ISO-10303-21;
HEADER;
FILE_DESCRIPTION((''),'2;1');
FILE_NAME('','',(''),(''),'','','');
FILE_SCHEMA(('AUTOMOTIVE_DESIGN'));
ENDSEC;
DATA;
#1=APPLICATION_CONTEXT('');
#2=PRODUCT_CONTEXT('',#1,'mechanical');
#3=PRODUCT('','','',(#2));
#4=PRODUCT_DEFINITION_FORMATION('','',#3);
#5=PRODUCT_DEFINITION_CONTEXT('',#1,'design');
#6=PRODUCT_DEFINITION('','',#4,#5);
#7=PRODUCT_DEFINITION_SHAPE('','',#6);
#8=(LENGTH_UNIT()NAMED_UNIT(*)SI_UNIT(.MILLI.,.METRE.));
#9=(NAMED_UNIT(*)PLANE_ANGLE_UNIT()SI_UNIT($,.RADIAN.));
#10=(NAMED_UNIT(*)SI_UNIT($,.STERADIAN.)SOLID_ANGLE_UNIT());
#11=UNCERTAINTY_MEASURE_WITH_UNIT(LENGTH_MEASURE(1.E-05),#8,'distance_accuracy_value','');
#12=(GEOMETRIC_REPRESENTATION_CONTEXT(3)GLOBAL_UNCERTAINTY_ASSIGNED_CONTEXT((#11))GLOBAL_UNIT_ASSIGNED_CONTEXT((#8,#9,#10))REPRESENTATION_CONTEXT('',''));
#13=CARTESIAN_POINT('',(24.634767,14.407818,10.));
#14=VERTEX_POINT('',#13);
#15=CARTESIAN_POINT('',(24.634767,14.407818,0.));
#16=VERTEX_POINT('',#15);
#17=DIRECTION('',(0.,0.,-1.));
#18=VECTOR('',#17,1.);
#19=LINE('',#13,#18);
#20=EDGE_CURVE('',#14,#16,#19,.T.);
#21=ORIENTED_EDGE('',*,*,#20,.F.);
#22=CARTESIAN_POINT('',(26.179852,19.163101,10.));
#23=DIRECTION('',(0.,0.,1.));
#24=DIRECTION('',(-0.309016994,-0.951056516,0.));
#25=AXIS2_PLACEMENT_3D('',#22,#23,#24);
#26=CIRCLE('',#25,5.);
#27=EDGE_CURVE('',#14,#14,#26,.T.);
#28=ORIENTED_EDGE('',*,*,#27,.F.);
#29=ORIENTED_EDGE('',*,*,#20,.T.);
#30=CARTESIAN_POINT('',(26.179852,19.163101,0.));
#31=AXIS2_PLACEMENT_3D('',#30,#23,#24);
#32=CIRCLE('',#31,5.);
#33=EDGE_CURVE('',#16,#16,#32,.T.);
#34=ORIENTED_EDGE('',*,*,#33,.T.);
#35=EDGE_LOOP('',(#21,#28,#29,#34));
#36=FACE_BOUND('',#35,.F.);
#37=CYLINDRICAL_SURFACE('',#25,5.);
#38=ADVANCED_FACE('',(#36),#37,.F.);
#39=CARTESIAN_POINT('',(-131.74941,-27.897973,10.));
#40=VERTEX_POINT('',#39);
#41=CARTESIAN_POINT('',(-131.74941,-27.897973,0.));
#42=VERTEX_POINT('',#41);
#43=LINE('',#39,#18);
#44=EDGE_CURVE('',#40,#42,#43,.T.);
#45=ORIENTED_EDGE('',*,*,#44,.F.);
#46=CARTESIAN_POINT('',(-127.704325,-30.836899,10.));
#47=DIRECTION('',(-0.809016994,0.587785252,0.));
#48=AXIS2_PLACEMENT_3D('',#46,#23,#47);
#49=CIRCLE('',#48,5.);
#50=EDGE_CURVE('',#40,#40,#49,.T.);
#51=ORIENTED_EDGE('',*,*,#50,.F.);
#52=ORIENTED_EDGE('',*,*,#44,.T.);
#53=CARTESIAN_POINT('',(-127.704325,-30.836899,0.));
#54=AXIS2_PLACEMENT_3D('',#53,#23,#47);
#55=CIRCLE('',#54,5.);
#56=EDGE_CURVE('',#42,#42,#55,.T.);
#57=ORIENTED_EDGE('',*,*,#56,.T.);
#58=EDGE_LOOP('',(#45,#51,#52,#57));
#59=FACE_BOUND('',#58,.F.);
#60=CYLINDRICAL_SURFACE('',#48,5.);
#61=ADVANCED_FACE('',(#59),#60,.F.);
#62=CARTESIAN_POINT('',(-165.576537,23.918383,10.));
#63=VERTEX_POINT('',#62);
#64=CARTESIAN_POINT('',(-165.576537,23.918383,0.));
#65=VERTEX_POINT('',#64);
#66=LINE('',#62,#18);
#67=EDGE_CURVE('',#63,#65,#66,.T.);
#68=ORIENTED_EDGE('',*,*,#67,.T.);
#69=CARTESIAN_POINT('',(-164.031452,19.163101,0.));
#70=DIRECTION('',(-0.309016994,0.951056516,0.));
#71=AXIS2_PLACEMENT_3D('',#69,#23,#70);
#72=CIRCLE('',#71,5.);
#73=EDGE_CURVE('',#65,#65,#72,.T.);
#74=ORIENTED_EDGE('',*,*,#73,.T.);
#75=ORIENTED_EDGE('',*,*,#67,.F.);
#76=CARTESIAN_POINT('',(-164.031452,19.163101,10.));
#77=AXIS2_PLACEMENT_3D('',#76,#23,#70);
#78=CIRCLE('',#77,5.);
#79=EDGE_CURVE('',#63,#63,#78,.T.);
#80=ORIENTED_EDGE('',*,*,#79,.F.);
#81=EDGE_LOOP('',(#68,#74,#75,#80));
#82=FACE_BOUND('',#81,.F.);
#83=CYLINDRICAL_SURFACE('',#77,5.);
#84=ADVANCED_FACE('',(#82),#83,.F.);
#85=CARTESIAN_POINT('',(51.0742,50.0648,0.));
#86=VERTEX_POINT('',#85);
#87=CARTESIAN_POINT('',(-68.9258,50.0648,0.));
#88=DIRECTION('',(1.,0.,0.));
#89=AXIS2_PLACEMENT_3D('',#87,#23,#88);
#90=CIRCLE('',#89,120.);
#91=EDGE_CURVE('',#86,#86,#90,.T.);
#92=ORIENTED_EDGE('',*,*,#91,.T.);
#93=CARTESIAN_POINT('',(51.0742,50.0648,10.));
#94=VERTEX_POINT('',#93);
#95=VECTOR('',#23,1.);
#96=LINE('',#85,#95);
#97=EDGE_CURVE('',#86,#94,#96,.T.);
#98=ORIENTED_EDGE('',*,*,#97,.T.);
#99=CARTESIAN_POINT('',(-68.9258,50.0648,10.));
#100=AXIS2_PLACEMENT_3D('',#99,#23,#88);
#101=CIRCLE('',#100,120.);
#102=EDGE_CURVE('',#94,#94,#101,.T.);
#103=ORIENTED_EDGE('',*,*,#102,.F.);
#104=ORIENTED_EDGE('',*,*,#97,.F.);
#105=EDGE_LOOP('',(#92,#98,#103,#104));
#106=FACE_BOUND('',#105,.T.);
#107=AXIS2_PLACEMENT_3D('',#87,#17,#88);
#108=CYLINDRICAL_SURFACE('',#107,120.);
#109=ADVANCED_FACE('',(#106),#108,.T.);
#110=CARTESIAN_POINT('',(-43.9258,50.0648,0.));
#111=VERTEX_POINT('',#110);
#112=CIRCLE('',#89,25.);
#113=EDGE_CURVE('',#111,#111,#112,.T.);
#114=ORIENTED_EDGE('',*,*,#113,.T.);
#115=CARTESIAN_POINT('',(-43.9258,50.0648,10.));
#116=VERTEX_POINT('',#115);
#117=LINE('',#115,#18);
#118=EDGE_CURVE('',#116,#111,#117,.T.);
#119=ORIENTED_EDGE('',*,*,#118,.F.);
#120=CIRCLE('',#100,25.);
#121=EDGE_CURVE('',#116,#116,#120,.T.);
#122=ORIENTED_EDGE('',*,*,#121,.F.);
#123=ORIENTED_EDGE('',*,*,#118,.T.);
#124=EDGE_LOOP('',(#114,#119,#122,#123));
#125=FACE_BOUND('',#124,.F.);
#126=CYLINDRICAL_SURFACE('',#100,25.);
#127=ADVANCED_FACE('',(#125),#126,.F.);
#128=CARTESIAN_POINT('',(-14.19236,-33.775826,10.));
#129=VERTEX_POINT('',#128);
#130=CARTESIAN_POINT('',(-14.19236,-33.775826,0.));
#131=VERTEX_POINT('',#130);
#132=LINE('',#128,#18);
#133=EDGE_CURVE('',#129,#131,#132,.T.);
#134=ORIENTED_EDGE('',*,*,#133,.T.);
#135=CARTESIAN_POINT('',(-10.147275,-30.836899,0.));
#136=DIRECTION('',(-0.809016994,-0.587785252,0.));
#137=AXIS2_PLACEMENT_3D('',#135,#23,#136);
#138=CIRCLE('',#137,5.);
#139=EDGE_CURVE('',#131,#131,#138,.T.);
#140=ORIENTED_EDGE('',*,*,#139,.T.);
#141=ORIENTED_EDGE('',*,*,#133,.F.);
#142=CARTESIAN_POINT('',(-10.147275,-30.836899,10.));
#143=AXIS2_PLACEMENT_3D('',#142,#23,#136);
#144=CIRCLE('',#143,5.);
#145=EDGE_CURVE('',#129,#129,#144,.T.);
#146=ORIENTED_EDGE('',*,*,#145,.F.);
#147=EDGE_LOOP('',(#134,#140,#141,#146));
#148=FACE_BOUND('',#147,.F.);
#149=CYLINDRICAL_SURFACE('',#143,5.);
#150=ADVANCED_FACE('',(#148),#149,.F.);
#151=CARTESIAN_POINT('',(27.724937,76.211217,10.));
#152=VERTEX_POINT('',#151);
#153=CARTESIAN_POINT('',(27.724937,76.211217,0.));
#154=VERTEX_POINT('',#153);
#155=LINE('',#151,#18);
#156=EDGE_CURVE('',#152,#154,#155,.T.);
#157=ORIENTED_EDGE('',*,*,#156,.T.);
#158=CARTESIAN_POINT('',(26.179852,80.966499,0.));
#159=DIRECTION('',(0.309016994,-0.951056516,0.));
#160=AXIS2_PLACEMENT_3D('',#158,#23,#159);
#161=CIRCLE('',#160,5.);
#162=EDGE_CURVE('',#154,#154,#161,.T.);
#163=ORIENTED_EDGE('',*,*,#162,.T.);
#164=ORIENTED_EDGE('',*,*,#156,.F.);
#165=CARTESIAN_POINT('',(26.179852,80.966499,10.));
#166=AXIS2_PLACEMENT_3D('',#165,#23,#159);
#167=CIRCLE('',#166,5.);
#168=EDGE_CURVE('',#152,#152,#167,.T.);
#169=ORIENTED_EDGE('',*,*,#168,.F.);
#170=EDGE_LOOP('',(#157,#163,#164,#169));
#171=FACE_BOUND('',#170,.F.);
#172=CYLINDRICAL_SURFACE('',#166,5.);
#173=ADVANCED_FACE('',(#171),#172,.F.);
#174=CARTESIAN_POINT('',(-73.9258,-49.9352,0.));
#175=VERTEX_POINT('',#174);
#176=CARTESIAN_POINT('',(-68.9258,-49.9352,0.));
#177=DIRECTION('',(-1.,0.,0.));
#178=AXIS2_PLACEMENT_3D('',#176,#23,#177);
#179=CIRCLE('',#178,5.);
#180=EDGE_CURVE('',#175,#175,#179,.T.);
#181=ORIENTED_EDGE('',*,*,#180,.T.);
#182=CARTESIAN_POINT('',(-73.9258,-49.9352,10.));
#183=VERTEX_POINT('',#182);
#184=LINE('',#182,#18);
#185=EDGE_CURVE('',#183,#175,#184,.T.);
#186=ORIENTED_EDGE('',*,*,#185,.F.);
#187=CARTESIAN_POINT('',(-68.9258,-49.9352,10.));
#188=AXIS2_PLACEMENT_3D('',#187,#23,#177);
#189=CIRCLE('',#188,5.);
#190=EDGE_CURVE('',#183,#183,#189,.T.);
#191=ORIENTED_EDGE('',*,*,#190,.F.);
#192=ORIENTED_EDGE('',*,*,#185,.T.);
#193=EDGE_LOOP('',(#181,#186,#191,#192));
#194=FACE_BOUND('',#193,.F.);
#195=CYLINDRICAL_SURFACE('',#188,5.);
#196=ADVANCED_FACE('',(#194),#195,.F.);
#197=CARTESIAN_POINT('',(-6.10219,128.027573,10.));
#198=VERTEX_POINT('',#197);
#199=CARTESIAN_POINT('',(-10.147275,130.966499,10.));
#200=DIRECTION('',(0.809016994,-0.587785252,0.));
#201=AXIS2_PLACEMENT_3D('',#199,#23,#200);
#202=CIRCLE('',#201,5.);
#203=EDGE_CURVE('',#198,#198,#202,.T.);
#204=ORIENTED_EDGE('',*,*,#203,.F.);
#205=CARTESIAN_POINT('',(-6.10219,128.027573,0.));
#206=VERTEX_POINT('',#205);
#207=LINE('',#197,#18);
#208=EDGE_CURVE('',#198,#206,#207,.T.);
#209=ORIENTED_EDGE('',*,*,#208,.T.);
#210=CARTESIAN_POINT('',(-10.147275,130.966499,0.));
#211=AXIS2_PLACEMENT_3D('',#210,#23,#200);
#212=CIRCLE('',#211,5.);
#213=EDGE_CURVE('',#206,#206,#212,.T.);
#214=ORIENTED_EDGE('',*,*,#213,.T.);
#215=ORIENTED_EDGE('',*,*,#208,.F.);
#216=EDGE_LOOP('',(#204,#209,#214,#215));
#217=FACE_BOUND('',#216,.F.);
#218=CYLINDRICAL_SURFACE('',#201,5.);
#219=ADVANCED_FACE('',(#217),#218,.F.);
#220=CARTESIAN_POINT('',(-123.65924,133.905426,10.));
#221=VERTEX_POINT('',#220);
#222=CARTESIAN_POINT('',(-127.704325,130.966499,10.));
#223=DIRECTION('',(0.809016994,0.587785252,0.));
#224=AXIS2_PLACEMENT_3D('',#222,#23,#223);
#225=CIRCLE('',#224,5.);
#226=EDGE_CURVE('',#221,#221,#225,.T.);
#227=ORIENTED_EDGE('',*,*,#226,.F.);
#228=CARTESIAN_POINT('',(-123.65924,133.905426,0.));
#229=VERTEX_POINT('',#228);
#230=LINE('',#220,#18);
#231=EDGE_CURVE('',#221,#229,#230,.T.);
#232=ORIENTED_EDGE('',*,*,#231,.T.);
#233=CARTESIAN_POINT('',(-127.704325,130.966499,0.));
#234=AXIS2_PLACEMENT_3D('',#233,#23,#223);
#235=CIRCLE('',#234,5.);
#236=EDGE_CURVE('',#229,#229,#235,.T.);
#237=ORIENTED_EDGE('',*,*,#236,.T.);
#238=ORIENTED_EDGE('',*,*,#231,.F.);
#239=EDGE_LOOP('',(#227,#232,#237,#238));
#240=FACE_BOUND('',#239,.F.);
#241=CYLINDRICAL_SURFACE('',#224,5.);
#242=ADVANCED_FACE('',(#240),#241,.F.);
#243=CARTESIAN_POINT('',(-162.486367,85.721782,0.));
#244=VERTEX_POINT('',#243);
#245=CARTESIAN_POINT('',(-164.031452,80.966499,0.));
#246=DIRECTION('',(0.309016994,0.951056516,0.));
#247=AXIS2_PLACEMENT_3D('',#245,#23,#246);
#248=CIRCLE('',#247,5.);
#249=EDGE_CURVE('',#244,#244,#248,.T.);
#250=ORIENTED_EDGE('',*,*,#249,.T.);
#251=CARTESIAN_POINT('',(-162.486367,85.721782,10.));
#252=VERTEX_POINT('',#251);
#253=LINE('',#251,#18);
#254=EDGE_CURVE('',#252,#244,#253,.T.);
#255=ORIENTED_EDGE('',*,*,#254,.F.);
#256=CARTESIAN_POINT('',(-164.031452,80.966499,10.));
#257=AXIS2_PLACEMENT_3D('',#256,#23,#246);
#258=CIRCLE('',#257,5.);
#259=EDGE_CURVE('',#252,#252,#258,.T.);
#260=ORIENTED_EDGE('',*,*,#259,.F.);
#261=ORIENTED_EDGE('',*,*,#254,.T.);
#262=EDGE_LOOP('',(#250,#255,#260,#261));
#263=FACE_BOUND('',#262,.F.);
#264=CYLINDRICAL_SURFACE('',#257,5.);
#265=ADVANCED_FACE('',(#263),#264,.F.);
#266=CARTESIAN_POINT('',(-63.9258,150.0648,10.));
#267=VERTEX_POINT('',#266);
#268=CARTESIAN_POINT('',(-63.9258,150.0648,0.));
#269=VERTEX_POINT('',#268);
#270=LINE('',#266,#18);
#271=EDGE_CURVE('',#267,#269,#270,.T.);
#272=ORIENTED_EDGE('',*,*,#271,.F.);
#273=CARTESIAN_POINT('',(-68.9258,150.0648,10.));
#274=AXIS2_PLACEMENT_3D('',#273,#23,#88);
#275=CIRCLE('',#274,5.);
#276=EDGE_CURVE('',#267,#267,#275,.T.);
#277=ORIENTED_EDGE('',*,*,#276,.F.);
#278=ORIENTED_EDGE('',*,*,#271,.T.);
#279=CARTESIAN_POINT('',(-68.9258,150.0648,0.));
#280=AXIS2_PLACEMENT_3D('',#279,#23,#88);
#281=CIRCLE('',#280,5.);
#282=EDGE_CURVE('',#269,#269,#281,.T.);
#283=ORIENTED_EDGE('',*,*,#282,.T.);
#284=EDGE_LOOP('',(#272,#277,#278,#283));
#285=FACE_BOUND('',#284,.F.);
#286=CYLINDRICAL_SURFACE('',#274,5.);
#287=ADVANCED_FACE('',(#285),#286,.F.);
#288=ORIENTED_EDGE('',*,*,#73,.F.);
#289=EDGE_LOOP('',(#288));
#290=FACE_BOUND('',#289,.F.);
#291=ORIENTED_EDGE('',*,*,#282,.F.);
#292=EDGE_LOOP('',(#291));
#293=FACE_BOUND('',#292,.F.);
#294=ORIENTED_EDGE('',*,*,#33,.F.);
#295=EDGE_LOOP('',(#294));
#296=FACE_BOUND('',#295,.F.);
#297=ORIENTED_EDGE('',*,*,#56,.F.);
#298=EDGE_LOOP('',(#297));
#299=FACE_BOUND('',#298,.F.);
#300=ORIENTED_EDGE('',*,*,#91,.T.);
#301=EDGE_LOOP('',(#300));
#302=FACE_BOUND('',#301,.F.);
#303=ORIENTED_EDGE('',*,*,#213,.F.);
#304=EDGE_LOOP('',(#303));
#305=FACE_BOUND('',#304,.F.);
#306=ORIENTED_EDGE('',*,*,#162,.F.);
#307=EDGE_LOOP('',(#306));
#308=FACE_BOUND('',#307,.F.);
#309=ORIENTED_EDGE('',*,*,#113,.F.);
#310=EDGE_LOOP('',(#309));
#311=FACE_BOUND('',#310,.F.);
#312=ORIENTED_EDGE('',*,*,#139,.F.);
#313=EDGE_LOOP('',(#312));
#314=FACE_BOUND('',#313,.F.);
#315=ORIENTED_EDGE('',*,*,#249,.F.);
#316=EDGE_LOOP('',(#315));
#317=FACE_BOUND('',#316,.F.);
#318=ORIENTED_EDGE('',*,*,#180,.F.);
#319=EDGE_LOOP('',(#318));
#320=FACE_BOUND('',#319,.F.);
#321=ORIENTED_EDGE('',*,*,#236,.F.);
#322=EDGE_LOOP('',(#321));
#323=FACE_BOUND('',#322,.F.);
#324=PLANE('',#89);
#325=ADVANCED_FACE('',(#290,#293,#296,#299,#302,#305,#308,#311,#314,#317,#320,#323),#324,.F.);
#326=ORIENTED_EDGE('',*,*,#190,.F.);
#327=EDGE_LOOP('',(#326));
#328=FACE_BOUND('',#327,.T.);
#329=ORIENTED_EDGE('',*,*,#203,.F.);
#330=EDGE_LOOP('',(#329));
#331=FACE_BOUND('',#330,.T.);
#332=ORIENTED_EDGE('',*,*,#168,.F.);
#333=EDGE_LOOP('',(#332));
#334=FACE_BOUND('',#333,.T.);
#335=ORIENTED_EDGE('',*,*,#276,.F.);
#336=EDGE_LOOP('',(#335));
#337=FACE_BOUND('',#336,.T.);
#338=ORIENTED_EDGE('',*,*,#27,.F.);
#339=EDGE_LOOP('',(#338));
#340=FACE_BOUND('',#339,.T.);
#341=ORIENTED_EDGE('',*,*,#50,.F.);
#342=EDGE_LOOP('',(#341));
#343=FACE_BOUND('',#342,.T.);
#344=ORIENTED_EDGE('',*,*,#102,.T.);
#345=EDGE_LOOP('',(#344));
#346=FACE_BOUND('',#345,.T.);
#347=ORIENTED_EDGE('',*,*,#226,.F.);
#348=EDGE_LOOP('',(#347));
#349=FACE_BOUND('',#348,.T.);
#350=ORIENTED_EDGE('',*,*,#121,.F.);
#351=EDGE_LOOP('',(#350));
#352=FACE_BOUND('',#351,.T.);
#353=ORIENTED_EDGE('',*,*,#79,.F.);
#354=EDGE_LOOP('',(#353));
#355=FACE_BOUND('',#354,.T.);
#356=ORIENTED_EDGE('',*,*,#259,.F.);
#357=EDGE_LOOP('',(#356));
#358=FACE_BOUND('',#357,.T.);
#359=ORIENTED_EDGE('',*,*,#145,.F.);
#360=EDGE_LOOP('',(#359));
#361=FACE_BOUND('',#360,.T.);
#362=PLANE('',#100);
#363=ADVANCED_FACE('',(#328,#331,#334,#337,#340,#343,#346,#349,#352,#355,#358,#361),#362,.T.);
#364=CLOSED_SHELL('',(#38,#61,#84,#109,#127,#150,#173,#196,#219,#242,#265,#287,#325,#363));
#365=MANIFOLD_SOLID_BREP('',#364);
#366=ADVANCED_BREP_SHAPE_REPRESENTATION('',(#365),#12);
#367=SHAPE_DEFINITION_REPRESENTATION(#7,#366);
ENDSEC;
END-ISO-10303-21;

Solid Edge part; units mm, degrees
sketch "Sketch1" plane through (0, 0, 0) normal (0, 0, 1) x (1, 0, 0)
  circle A0 centre (-68.9258, 50.0648) radius 120
  dimension "D1" = 240
extrude "Protrusion1" add sketch "Sketch1" along normal blind 10
sketch "Sketch2" plane through (-68.9258, 50.0648, 10) normal (0, 0, 1) x (1, 0, 0)
  circle A0 centre (0, 100) radius 5
  dimension "D1" = 10
  dimension "D2" = 20
extrude "Cutout1" cut sketch "Sketch2" against normal through all
pattern_circular "Pattern1" count 10 over 360 about axis through (-68.9258, 50.0648, 10) along (0, 0, -1) of "Cutout1"
sketch "Sketch3" plane through (-68.9258, 50.0648, 10) normal (0, 0, 1) x (1, 0, 0)
  circle A0 centre (0, 0) radius 25
  dimension "D1" = 50
extrude "Cutout2" cut sketch "Sketch3" against normal through all
